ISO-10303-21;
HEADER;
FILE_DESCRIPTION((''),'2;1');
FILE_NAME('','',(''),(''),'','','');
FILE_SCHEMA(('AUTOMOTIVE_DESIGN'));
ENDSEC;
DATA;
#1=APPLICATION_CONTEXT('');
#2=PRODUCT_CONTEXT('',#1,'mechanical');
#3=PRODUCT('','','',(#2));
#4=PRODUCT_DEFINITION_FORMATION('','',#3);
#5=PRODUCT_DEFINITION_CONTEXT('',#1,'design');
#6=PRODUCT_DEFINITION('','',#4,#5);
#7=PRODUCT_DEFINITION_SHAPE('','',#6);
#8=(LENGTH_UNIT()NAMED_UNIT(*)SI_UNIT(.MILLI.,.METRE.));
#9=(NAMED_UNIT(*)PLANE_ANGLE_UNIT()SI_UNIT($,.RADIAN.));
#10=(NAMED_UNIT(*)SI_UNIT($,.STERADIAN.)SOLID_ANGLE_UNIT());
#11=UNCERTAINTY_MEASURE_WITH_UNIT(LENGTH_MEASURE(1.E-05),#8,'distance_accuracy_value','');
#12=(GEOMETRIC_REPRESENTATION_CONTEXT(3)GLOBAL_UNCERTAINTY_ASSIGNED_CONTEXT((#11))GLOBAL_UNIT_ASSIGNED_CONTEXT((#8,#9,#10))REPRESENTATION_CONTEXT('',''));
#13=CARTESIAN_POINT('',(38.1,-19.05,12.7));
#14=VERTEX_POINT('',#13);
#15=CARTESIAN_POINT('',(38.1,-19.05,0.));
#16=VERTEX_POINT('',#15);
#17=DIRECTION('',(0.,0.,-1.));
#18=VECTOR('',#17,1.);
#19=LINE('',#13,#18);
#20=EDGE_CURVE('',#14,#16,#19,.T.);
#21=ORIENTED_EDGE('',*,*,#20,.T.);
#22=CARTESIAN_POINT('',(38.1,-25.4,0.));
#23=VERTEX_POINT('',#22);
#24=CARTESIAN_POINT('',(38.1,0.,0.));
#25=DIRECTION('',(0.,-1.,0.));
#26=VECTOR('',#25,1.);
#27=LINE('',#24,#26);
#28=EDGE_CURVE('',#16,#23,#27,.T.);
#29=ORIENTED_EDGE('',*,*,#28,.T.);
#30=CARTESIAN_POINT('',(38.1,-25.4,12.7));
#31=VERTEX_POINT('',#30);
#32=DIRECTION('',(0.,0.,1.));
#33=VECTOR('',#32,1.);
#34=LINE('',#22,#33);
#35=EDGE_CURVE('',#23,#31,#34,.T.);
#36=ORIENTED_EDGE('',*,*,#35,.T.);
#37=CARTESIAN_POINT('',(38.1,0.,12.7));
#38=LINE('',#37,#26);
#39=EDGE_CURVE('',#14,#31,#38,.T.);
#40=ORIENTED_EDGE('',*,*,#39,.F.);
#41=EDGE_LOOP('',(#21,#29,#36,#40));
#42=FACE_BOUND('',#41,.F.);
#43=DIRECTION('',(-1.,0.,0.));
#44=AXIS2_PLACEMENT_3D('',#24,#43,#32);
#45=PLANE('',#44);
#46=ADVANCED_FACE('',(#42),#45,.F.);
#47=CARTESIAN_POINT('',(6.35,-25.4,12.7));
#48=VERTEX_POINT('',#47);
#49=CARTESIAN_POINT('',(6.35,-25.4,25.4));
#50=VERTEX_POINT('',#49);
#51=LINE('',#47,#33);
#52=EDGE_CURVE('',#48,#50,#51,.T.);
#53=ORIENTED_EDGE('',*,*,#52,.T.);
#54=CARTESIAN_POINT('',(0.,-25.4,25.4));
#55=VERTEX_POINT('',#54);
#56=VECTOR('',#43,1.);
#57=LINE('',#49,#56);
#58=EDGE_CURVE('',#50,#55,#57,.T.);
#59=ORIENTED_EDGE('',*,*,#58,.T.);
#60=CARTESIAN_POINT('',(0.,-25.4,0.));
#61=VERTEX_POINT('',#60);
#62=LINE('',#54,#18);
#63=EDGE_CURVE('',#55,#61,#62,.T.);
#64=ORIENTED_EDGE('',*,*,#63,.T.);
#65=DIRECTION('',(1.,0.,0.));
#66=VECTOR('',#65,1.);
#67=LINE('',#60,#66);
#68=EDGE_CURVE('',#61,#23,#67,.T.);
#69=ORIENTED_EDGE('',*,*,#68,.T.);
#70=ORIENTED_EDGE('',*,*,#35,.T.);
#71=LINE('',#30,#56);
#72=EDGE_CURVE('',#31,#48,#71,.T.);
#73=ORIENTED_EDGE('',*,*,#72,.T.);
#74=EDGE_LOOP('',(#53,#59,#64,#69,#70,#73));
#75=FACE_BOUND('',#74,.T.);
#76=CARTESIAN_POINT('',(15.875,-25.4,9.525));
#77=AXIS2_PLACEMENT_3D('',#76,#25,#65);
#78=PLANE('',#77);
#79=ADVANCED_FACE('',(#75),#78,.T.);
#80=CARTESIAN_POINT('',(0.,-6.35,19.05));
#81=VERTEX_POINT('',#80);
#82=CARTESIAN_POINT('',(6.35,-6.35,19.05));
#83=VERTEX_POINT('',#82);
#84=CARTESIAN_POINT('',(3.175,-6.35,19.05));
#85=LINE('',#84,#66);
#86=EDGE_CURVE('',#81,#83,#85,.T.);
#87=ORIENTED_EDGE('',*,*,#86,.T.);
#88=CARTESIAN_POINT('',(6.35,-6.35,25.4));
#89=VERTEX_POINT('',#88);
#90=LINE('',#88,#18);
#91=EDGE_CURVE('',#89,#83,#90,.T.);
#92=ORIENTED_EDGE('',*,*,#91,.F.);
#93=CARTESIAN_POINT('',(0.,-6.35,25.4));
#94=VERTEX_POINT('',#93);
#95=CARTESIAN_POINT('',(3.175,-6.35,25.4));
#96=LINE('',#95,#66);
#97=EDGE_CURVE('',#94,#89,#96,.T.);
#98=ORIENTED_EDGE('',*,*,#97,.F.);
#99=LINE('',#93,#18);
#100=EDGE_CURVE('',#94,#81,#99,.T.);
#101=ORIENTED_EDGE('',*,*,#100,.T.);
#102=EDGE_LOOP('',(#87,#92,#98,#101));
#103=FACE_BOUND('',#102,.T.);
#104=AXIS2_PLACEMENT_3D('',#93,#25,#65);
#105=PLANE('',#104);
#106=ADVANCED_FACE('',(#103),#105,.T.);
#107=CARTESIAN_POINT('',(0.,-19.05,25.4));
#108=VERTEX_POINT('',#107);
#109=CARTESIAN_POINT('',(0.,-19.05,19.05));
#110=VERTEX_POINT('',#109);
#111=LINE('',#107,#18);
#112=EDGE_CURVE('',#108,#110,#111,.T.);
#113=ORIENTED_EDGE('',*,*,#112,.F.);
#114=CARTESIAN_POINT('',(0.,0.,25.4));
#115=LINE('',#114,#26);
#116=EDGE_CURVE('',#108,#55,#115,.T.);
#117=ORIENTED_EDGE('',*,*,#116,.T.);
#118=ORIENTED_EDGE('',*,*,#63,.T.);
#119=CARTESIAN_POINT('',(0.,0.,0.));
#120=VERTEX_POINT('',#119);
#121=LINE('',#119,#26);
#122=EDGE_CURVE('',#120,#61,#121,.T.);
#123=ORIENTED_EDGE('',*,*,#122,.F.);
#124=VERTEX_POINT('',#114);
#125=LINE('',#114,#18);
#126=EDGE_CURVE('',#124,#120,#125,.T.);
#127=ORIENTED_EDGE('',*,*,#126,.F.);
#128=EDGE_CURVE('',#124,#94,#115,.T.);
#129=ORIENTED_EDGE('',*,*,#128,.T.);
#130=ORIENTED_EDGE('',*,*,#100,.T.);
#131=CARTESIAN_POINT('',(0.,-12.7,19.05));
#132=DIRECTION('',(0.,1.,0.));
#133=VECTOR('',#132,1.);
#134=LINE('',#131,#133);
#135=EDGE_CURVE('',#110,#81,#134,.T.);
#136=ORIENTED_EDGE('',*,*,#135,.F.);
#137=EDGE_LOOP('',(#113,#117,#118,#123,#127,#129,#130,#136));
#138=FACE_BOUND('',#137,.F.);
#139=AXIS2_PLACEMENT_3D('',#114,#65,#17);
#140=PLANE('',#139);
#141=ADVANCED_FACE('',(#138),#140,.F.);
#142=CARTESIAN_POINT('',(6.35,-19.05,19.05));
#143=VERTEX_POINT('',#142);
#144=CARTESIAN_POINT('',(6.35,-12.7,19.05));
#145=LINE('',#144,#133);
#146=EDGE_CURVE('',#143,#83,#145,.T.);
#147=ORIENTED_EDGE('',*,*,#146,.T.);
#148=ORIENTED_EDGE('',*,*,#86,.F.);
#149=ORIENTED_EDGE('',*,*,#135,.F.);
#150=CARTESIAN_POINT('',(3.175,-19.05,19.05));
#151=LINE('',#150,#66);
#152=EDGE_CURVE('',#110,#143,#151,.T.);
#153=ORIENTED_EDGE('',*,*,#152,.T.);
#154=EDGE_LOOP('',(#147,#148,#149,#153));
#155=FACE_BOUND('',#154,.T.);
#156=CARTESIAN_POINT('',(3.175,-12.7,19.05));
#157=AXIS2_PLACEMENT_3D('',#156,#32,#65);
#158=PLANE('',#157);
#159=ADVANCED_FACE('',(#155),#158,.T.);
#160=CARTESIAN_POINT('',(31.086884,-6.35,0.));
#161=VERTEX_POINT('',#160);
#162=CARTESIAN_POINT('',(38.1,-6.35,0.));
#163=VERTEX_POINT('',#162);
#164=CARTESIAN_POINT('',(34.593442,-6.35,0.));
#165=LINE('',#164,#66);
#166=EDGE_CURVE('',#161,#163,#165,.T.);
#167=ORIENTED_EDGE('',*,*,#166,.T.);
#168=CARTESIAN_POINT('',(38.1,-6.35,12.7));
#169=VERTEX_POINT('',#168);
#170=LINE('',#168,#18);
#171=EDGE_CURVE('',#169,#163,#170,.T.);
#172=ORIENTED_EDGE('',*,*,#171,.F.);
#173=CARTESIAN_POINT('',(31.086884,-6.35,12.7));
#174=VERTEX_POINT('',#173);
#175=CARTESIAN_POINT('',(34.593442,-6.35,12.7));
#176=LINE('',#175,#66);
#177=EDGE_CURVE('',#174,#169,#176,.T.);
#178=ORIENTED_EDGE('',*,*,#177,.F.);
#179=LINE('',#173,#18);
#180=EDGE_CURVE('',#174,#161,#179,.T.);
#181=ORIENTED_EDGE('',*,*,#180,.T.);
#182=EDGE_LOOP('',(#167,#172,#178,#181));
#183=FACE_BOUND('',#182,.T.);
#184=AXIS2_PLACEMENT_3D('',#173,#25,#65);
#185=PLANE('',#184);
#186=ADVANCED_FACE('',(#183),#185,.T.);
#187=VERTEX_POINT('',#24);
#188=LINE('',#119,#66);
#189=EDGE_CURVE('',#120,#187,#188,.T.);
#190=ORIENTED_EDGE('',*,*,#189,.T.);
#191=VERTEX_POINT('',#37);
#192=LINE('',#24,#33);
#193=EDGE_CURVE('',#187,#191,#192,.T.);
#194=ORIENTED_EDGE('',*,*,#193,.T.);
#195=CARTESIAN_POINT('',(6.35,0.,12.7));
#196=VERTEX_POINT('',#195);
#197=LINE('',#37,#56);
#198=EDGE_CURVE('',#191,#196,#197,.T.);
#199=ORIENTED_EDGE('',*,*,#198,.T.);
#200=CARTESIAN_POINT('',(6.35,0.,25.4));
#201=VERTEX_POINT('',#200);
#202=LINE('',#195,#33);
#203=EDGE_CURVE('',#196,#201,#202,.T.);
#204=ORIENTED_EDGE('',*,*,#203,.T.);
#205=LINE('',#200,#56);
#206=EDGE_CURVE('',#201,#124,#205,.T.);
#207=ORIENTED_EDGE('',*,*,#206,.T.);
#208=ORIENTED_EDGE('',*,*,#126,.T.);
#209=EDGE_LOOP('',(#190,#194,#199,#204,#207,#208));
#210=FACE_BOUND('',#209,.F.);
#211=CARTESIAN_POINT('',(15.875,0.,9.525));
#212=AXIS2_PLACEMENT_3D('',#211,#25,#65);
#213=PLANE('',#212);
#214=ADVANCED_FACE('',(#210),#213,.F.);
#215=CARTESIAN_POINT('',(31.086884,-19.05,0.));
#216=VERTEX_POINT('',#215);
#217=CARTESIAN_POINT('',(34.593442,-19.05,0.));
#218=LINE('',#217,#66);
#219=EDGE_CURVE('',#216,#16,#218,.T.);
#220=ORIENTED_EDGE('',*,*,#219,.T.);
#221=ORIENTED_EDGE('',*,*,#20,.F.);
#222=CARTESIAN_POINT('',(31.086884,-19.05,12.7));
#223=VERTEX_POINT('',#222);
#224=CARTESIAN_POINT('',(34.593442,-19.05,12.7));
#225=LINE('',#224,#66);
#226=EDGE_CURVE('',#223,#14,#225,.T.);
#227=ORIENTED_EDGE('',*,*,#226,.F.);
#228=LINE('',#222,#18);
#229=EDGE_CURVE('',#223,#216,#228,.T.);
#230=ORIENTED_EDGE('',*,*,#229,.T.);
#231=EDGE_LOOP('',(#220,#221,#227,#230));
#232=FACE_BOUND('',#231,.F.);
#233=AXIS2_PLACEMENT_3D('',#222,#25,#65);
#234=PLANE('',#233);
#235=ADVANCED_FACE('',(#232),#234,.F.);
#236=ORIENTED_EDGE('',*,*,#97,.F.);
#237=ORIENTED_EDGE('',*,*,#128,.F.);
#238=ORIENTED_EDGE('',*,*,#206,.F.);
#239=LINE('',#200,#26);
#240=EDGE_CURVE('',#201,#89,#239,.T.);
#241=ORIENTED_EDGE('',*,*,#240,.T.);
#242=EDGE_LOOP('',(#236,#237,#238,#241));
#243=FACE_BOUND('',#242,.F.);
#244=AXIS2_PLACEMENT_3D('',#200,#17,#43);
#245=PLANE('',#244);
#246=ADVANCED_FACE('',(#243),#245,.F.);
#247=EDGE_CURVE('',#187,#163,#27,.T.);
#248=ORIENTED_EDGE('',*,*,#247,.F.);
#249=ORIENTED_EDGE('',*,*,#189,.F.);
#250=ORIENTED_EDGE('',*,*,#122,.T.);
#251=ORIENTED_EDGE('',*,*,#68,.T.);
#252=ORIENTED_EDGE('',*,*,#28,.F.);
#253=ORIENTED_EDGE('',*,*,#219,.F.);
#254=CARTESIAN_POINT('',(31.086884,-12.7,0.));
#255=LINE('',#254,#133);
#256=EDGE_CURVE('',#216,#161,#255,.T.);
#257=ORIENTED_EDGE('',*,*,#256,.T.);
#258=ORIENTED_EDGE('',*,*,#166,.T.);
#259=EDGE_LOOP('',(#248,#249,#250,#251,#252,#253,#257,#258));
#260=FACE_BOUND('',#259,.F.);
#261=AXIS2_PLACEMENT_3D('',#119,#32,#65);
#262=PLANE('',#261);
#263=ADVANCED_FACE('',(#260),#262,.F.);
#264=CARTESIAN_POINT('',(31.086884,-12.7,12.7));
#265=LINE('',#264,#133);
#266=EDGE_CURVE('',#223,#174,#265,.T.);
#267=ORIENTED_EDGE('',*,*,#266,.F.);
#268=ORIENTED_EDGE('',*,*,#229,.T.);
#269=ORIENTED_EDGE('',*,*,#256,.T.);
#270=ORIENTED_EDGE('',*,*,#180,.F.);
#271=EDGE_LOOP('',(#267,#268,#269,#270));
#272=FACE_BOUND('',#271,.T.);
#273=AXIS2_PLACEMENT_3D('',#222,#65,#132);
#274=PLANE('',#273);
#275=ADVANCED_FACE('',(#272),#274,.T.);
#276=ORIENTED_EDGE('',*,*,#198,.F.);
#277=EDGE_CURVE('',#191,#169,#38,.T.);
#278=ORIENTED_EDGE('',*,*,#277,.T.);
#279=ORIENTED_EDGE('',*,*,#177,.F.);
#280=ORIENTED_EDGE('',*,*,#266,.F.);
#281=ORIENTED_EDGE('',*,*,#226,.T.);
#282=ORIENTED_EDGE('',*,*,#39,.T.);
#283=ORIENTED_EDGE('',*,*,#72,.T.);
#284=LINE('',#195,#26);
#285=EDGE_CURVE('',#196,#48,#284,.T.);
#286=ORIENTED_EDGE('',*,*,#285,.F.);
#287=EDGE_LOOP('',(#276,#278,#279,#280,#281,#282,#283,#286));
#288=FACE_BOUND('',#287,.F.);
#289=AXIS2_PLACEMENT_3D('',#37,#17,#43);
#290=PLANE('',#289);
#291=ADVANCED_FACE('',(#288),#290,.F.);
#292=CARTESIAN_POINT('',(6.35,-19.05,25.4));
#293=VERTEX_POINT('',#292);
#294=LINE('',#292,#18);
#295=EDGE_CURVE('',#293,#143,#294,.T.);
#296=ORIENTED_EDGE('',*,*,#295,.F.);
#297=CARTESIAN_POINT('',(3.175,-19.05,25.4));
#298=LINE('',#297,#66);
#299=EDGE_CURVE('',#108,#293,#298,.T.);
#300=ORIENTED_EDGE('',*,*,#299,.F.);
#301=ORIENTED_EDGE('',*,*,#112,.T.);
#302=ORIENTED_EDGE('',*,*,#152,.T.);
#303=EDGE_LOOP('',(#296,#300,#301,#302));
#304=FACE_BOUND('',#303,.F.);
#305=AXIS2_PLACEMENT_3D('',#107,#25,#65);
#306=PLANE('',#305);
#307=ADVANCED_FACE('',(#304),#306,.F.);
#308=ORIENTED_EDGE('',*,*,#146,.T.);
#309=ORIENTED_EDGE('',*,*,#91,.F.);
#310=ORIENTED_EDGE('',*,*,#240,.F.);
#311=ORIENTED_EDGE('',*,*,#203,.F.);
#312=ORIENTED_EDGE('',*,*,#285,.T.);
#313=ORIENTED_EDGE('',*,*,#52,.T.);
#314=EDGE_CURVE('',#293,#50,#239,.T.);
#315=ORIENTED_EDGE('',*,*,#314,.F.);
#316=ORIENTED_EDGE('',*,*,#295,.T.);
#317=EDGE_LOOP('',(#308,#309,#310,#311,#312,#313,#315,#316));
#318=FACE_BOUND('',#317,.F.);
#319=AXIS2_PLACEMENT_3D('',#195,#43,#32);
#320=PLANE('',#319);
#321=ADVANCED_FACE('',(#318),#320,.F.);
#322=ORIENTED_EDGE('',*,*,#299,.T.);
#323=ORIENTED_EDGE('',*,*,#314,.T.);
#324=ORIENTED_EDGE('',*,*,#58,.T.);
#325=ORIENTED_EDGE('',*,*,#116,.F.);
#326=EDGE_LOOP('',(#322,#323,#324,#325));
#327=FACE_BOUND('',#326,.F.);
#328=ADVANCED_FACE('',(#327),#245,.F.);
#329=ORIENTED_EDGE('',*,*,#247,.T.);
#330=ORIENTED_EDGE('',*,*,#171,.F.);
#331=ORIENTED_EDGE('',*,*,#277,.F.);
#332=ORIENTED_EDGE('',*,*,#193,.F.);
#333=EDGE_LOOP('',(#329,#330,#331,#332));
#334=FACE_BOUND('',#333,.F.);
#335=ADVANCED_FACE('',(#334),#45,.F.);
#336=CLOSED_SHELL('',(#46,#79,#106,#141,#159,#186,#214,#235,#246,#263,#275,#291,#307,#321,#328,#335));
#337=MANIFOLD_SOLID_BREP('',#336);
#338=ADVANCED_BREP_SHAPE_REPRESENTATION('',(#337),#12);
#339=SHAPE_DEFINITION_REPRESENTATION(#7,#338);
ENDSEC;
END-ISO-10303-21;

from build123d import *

# Parameters (mm, degrees)
F1_DEPTH = 25.4
F2_W     = 6.35
F2_H     = 12.7
F3_DEPTH = 6.35
F4_W     = 7.0131157884
F4_H     = 12.7
F5_DEPTH = 12.7


# Not quite as in the source:
# - a feature names something its author has since deleted; it is built from what else it names


with BuildPart() as f1:
    # F0 (on Front) → F1 (new body)
    with BuildSketch(Plane.XZ):
        Polygon((6.35, 25.4), (0, 25.4), (0, 0), (38.1, 0), (38.1, 12.7), (6.35, 12.7), align=None)
    extrude(amount=F1_DEPTH)

    # F2 (on face) → F3 (cut)
    with BuildSketch(Plane.XY.offset(25.4)):
        with Locations((3.175, -12.7)):
            Rectangle(F2_W, F2_H)
    extrude(amount=-F3_DEPTH, mode=Mode.SUBTRACT)

    # F4 (on face) → F5 (cut)
    with BuildSketch(Plane.XY.offset(12.7)):
        with Locations((34.5934421058, -12.7)):
            Rectangle(F4_W, F4_H)
    extrude(amount=-F5_DEPTH, mode=Mode.SUBTRACT)


solid = f1.part
